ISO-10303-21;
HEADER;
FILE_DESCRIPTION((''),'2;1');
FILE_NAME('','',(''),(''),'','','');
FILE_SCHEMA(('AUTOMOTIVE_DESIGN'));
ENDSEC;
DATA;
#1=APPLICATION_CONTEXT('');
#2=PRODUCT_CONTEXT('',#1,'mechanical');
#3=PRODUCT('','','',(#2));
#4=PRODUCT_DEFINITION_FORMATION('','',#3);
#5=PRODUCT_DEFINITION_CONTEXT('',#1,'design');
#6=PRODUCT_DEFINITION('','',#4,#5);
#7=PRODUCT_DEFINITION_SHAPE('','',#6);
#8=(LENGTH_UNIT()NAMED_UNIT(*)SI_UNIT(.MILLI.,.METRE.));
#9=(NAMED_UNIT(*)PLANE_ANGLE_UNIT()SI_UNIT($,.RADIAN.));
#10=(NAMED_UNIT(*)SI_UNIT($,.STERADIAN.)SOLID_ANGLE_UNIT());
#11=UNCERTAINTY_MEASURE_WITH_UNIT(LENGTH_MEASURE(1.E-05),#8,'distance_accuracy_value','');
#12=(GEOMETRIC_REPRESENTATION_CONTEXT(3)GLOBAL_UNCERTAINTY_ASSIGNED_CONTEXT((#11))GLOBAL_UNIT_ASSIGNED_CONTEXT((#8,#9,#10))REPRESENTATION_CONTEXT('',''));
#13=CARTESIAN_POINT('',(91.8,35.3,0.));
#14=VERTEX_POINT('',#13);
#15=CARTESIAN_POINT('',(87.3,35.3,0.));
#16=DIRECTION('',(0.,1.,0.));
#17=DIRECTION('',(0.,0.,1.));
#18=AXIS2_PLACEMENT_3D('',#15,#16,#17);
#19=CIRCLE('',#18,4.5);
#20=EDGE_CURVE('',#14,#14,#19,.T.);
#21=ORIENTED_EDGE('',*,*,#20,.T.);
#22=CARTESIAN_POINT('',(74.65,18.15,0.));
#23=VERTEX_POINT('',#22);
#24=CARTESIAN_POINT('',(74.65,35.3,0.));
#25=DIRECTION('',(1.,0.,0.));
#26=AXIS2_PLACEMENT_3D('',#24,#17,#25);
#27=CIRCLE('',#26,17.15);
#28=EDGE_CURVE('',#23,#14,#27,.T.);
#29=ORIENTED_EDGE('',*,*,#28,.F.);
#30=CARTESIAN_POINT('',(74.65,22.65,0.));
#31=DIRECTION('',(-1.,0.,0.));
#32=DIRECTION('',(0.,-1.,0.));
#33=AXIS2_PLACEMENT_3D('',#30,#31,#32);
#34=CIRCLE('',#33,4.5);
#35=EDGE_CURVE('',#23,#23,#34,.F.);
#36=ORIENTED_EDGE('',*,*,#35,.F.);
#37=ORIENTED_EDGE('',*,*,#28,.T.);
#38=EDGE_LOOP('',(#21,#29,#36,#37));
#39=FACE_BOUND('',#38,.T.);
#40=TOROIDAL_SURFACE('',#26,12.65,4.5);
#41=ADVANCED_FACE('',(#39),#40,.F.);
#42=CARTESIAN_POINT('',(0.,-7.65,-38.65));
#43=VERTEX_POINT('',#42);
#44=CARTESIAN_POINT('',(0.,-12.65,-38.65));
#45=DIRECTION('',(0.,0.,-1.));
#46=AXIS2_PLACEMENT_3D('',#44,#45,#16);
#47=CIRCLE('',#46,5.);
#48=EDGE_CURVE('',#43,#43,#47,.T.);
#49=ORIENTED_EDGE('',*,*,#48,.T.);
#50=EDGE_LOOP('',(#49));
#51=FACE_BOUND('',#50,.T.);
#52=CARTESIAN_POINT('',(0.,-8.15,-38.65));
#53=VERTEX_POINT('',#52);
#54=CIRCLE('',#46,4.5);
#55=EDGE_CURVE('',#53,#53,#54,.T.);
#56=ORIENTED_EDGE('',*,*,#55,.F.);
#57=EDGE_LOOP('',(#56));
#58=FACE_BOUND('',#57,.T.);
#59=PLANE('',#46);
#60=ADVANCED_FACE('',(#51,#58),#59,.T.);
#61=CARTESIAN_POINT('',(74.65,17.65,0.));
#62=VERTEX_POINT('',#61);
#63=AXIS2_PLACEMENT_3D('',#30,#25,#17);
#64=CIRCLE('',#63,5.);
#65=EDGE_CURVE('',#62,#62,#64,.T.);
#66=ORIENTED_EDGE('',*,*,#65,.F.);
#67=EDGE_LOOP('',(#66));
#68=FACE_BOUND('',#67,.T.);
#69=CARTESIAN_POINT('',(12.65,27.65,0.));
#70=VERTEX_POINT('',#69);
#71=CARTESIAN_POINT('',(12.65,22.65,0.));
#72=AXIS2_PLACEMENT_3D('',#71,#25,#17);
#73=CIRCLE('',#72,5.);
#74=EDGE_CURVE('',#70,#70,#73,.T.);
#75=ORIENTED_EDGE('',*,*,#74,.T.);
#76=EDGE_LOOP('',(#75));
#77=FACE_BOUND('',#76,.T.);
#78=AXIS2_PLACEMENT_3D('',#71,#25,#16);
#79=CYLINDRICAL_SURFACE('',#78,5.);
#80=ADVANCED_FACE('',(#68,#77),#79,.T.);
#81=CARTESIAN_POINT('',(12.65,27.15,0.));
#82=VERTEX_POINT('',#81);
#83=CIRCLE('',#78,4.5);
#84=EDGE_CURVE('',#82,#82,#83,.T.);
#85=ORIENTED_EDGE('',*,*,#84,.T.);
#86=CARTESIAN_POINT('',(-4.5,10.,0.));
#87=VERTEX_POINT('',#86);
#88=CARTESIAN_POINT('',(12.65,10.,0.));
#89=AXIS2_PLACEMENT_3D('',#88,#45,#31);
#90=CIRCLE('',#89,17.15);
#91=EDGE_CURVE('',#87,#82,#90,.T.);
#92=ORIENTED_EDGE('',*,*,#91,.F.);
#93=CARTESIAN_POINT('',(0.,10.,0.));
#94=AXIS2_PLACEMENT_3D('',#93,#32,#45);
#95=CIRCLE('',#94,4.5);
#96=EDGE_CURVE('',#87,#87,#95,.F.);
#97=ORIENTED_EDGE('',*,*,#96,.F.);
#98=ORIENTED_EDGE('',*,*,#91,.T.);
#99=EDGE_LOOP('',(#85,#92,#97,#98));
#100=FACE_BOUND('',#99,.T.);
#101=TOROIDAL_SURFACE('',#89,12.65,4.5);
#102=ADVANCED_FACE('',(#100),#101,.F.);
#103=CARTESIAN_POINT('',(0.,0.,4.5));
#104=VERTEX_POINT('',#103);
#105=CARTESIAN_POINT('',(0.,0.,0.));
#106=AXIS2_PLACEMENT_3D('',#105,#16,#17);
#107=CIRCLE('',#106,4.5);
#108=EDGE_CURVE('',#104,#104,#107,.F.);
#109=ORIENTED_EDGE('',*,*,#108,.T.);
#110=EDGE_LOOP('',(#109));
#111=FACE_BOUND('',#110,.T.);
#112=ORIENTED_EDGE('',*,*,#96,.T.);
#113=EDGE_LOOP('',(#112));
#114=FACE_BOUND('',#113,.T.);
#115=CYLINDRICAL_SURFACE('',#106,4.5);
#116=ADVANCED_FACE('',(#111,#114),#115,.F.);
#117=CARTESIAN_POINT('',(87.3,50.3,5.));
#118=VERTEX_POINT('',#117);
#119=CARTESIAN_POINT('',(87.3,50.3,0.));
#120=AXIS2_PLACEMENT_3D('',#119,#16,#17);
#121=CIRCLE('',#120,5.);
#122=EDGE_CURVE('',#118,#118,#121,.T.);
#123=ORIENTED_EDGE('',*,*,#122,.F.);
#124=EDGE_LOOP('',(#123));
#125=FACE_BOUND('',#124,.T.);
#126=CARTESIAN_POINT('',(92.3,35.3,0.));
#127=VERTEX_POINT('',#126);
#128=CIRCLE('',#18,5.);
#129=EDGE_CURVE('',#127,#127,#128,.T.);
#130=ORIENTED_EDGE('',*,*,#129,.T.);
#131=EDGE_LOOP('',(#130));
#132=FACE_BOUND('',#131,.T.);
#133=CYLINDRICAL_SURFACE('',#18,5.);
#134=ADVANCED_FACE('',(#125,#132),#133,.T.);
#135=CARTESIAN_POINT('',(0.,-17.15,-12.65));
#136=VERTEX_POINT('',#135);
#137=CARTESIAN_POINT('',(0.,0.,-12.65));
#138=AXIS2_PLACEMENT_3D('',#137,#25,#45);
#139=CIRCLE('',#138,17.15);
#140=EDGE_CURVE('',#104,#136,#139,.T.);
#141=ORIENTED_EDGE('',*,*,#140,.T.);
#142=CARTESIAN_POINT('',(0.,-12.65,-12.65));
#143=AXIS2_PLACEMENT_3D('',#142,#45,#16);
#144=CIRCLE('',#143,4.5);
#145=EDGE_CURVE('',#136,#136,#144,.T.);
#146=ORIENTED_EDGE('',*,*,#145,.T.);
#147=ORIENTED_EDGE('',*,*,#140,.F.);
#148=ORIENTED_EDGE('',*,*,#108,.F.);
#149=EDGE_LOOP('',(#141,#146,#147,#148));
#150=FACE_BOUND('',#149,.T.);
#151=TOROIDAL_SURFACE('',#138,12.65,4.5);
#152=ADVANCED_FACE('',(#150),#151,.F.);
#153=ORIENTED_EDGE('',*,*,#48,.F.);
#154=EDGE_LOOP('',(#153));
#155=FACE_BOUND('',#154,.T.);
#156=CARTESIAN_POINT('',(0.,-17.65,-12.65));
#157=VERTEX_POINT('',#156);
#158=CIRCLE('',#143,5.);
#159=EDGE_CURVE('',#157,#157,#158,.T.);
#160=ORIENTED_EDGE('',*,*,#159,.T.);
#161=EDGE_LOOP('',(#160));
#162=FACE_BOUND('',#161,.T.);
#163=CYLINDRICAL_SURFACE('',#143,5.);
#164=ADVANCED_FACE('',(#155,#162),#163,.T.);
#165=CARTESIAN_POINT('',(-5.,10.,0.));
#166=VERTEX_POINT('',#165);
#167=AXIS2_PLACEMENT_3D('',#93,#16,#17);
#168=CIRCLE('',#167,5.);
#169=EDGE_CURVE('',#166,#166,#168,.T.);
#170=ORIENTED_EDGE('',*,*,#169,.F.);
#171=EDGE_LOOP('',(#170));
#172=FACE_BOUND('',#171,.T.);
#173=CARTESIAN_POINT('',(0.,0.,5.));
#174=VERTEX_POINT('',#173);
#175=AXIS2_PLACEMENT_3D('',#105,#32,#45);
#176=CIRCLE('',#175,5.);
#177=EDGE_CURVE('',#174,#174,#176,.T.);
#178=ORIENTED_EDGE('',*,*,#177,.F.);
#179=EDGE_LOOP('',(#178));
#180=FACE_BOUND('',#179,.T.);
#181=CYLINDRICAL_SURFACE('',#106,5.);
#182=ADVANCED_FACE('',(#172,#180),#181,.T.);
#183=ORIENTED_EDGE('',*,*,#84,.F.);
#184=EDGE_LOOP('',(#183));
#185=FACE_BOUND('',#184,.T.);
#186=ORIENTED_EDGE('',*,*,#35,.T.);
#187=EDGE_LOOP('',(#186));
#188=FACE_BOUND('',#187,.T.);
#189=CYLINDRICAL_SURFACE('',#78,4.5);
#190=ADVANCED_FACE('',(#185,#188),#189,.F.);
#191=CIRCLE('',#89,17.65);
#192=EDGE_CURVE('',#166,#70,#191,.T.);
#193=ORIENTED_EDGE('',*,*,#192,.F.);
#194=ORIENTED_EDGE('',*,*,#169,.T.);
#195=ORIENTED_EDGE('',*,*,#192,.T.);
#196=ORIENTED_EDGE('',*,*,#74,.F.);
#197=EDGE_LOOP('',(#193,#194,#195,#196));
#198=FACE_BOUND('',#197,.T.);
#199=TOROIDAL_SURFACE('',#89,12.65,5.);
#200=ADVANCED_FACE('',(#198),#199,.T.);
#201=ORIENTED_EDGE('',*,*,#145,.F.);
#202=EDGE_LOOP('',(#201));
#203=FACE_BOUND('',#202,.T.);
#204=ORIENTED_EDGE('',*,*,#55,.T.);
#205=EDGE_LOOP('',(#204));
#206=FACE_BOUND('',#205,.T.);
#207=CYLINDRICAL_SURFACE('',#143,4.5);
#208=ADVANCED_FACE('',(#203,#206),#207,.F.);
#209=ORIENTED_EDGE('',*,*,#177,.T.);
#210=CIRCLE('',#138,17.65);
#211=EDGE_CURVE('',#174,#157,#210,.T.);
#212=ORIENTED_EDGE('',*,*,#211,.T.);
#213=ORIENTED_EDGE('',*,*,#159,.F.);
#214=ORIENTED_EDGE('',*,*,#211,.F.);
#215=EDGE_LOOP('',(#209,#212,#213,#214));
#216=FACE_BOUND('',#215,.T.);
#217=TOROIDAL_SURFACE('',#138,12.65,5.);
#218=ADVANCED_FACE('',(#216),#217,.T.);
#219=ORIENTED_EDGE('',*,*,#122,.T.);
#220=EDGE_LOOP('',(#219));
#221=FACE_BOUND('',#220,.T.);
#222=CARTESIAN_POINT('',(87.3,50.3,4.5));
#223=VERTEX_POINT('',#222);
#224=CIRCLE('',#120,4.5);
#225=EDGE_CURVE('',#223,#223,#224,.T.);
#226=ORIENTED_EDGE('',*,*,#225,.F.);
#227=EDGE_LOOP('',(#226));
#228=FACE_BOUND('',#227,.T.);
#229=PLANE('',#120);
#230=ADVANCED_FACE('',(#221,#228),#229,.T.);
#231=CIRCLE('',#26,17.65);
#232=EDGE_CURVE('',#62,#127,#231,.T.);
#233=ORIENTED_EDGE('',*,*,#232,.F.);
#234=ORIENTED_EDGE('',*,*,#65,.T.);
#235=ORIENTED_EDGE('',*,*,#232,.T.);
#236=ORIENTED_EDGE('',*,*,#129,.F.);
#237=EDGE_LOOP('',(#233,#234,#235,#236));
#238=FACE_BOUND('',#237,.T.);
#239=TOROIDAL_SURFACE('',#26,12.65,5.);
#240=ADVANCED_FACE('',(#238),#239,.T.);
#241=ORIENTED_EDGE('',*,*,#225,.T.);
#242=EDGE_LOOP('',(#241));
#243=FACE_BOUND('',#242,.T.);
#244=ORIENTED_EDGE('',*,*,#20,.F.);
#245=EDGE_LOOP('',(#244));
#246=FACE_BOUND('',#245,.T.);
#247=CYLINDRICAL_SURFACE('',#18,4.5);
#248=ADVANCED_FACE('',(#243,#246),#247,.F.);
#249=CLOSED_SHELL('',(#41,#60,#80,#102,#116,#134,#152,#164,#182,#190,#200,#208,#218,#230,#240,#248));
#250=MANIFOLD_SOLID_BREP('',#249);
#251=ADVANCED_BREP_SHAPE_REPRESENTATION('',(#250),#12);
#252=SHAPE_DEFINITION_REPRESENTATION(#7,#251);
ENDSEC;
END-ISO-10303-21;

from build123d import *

# Parameters (mm, degrees)
SKETCH2_R          = 5
SWEEP2_OUTLINE_R   = 5
SWEEP2_ANGLE       = 90
SWEEP2_START       = -38.65
SWEEP2_2_OUTLINE_R = 5
SWEEP2_2_DEPTH     = 26.65
SHELL1_T           = -0.5


with BuildPart() as part:
    # Sweep1: sweep along a path in Sketch3
    with BuildLine(Plane.XY) as sweep1_path:
        Line((0, 0), (0, 10))
        ThreePointArc((0, 10), (3.705099218, 18.944900782), (12.65, 22.65))
        Line((12.65, 22.65), (74.65, 22.65))
        ThreePointArc((74.65, 22.65), (83.594900782, 26.355099218), (87.3, 35.3))
        Line((87.3, 35.3), (87.3, 50.3))
    # Sketch2 → Sweep1 (sweep)
    with BuildSketch(Plane(origin=(0, 0, 0), x_dir=(1, 0, 0), z_dir=(0, 1, 0))):
        Circle(SKETCH2_R)
    sweep(path=sweep1_path.line)

    # Sweep2: read off the stored shape, not the designer's step
    # Sweep2 outline → Sweep2 (revolve)
    with BuildSketch(Plane(origin=(0, 0, -12.65), x_dir=(0, 0, 1), z_dir=(0, 1, 0))):
        with Locations((12.65, 0)):
            Circle(SWEEP2_OUTLINE_R)
    revolve(axis=Axis((0, 0, -12.65), (1, 0, 0)), revolution_arc=SWEEP2_ANGLE)

    # Sweep2 2 outline → Sweep2 2 (add)
    with BuildSketch(Plane.XY.offset(SWEEP2_START)):
        with Locations((0, -12.65)):
            Circle(SWEEP2_2_OUTLINE_R)
    extrude(amount=SWEEP2_2_DEPTH)

    # Shell1
    shell1_openings = [part.faces().sort_by_distance(p)[0] for p in [
        (0, -12.65, -38.65),
        (87.3, 50.3, 0),
    ]]
    offset(amount=SHELL1_T, openings=shell1_openings, kind=Kind.INTERSECTION)


solid = part.part
